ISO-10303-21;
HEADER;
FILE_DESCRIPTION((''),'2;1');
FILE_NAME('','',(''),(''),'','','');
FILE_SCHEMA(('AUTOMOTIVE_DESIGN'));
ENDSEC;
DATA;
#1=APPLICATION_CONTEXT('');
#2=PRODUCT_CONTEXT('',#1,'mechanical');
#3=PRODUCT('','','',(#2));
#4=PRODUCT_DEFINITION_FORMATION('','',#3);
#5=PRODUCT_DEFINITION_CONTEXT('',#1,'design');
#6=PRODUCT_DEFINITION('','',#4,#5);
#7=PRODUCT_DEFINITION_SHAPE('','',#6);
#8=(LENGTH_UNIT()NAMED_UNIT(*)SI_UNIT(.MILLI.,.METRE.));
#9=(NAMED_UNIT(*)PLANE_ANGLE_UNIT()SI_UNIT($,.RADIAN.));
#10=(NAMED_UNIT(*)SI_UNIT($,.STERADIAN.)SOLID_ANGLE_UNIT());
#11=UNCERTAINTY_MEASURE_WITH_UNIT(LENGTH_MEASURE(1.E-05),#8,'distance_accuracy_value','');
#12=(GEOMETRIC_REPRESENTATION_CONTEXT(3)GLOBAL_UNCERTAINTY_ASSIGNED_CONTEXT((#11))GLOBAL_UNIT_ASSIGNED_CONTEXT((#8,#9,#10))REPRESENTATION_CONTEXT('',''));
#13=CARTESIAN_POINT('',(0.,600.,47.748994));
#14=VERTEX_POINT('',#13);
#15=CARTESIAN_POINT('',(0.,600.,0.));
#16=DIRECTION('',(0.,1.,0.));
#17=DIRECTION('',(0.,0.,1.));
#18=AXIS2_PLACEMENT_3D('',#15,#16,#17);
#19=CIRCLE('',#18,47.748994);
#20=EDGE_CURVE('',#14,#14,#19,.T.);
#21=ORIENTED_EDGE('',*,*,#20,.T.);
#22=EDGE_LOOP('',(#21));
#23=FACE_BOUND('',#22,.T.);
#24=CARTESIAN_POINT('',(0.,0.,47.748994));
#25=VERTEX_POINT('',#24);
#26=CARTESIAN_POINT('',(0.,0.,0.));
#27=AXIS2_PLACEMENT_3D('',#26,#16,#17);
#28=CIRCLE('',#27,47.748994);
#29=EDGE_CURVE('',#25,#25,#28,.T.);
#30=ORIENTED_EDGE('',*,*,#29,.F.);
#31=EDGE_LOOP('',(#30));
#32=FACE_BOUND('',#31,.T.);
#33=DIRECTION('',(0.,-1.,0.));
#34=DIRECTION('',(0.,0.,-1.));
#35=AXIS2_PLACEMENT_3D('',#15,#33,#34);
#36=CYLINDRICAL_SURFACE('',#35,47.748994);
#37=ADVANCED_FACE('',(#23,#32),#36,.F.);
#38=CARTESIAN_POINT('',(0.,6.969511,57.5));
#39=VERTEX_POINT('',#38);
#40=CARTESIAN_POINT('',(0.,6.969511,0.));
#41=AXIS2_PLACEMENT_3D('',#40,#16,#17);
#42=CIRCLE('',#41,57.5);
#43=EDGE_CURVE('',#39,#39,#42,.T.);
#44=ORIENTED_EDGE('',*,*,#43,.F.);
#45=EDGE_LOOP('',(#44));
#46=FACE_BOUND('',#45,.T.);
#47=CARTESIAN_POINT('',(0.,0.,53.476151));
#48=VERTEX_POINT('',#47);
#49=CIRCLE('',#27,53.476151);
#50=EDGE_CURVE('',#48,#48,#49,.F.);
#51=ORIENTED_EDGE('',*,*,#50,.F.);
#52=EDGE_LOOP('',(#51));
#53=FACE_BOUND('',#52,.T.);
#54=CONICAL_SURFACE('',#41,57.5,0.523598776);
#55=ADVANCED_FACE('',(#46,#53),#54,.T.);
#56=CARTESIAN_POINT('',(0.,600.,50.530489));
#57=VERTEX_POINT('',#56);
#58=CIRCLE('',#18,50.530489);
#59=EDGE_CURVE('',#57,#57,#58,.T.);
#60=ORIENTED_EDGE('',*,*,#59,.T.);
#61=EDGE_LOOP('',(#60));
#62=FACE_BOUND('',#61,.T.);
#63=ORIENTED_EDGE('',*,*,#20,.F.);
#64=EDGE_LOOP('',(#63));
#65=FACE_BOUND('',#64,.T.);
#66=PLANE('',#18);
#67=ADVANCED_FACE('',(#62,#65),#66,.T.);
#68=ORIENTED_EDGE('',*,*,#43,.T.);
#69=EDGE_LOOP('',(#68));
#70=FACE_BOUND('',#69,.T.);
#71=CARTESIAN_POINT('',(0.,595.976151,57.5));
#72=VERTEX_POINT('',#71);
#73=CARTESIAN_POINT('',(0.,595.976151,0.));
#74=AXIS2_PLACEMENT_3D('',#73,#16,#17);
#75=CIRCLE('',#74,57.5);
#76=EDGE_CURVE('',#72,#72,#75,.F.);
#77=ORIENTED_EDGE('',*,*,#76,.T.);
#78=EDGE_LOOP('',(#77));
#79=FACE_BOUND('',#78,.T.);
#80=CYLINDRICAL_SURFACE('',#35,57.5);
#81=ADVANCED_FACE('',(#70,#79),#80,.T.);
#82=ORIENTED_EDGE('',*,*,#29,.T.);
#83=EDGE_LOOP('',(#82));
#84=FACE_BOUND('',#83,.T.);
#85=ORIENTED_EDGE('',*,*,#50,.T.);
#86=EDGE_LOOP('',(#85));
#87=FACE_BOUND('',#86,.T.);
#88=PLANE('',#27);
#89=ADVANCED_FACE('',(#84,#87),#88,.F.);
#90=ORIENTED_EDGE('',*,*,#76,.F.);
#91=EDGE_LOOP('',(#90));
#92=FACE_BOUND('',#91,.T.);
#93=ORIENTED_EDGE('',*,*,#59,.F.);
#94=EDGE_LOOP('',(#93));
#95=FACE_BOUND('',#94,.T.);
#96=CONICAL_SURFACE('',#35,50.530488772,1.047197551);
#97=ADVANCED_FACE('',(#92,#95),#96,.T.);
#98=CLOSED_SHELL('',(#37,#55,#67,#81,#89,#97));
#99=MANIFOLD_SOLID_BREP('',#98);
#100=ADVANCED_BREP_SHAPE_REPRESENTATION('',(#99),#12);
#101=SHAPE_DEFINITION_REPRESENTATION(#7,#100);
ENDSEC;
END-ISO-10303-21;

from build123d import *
from OCP.BRepFilletAPI import BRepFilletAPI_MakeChamfer

# Parameters (mm, degrees)
SKETCH1_R           = 57.5
BOSS_EXTRUDE1_DEPTH = 600
SKETCH2_R           = 47.748993913
CUT_EXTRUDE1_DEPTH  = 606.485342515
CHAMFER1_SIZE       = 4.023849184
CHAMFER1_SIZE2      = 6.969511228


with BuildPart() as part:
    # Sketch1 → Boss-Extrude1 (new body)
    with BuildSketch(Plane(origin=(0, 0, 0), x_dir=(1, 0, 0), z_dir=(0, 1, 0))):
        Circle(SKETCH1_R)
    extrude(amount=BOSS_EXTRUDE1_DEPTH)

    # Sketch2 → Cut-Extrude1 (cut, through all)
    with BuildSketch(Plane(origin=(0, 0, 0), x_dir=(1, 0, 0), z_dir=(0, 1, 0))):
        Circle(SKETCH2_R)
    extrude(amount=CUT_EXTRUDE1_DEPTH, mode=Mode.SUBTRACT)

    # Chamfer1: one chamfer whose edges measure the first distance from different faces: ONE call of the kernel's chamfer builder (chamfer() names one face for all edges)
    chamfer1_edges_1 = [part.edges().sort_by_distance(p)[0] for p in [
        (-57.5, 600, 0),
    ]]
    chamfer1_side_1 = [part.faces().sort_by_distance(p)[0] for p in [
        (-57.5, 300, 0),
    ]]
    chamfer1_edges_2 = [part.edges().sort_by_distance(p)[0] for p in [
        (-57.5, 0, 0),
    ]]
    chamfer1_side_2 = [part.faces().sort_by_distance(p)[0] for p in [
        (-55.873654403, 0, 0),
    ]]
    chamfer1 = BRepFilletAPI_MakeChamfer(part.part.solid().wrapped)
    for e in chamfer1_edges_1:
        chamfer1.Add(CHAMFER1_SIZE, CHAMFER1_SIZE2, e.wrapped, chamfer1_side_1[0].wrapped)  # the first distance lies on this face
    for e in chamfer1_edges_2:
        chamfer1.Add(CHAMFER1_SIZE, CHAMFER1_SIZE2, e.wrapped, chamfer1_side_2[0].wrapped)  # the first distance lies on this face
    add(Compound.cast(chamfer1.Shape()), mode=Mode.REPLACE)


solid = part.part
